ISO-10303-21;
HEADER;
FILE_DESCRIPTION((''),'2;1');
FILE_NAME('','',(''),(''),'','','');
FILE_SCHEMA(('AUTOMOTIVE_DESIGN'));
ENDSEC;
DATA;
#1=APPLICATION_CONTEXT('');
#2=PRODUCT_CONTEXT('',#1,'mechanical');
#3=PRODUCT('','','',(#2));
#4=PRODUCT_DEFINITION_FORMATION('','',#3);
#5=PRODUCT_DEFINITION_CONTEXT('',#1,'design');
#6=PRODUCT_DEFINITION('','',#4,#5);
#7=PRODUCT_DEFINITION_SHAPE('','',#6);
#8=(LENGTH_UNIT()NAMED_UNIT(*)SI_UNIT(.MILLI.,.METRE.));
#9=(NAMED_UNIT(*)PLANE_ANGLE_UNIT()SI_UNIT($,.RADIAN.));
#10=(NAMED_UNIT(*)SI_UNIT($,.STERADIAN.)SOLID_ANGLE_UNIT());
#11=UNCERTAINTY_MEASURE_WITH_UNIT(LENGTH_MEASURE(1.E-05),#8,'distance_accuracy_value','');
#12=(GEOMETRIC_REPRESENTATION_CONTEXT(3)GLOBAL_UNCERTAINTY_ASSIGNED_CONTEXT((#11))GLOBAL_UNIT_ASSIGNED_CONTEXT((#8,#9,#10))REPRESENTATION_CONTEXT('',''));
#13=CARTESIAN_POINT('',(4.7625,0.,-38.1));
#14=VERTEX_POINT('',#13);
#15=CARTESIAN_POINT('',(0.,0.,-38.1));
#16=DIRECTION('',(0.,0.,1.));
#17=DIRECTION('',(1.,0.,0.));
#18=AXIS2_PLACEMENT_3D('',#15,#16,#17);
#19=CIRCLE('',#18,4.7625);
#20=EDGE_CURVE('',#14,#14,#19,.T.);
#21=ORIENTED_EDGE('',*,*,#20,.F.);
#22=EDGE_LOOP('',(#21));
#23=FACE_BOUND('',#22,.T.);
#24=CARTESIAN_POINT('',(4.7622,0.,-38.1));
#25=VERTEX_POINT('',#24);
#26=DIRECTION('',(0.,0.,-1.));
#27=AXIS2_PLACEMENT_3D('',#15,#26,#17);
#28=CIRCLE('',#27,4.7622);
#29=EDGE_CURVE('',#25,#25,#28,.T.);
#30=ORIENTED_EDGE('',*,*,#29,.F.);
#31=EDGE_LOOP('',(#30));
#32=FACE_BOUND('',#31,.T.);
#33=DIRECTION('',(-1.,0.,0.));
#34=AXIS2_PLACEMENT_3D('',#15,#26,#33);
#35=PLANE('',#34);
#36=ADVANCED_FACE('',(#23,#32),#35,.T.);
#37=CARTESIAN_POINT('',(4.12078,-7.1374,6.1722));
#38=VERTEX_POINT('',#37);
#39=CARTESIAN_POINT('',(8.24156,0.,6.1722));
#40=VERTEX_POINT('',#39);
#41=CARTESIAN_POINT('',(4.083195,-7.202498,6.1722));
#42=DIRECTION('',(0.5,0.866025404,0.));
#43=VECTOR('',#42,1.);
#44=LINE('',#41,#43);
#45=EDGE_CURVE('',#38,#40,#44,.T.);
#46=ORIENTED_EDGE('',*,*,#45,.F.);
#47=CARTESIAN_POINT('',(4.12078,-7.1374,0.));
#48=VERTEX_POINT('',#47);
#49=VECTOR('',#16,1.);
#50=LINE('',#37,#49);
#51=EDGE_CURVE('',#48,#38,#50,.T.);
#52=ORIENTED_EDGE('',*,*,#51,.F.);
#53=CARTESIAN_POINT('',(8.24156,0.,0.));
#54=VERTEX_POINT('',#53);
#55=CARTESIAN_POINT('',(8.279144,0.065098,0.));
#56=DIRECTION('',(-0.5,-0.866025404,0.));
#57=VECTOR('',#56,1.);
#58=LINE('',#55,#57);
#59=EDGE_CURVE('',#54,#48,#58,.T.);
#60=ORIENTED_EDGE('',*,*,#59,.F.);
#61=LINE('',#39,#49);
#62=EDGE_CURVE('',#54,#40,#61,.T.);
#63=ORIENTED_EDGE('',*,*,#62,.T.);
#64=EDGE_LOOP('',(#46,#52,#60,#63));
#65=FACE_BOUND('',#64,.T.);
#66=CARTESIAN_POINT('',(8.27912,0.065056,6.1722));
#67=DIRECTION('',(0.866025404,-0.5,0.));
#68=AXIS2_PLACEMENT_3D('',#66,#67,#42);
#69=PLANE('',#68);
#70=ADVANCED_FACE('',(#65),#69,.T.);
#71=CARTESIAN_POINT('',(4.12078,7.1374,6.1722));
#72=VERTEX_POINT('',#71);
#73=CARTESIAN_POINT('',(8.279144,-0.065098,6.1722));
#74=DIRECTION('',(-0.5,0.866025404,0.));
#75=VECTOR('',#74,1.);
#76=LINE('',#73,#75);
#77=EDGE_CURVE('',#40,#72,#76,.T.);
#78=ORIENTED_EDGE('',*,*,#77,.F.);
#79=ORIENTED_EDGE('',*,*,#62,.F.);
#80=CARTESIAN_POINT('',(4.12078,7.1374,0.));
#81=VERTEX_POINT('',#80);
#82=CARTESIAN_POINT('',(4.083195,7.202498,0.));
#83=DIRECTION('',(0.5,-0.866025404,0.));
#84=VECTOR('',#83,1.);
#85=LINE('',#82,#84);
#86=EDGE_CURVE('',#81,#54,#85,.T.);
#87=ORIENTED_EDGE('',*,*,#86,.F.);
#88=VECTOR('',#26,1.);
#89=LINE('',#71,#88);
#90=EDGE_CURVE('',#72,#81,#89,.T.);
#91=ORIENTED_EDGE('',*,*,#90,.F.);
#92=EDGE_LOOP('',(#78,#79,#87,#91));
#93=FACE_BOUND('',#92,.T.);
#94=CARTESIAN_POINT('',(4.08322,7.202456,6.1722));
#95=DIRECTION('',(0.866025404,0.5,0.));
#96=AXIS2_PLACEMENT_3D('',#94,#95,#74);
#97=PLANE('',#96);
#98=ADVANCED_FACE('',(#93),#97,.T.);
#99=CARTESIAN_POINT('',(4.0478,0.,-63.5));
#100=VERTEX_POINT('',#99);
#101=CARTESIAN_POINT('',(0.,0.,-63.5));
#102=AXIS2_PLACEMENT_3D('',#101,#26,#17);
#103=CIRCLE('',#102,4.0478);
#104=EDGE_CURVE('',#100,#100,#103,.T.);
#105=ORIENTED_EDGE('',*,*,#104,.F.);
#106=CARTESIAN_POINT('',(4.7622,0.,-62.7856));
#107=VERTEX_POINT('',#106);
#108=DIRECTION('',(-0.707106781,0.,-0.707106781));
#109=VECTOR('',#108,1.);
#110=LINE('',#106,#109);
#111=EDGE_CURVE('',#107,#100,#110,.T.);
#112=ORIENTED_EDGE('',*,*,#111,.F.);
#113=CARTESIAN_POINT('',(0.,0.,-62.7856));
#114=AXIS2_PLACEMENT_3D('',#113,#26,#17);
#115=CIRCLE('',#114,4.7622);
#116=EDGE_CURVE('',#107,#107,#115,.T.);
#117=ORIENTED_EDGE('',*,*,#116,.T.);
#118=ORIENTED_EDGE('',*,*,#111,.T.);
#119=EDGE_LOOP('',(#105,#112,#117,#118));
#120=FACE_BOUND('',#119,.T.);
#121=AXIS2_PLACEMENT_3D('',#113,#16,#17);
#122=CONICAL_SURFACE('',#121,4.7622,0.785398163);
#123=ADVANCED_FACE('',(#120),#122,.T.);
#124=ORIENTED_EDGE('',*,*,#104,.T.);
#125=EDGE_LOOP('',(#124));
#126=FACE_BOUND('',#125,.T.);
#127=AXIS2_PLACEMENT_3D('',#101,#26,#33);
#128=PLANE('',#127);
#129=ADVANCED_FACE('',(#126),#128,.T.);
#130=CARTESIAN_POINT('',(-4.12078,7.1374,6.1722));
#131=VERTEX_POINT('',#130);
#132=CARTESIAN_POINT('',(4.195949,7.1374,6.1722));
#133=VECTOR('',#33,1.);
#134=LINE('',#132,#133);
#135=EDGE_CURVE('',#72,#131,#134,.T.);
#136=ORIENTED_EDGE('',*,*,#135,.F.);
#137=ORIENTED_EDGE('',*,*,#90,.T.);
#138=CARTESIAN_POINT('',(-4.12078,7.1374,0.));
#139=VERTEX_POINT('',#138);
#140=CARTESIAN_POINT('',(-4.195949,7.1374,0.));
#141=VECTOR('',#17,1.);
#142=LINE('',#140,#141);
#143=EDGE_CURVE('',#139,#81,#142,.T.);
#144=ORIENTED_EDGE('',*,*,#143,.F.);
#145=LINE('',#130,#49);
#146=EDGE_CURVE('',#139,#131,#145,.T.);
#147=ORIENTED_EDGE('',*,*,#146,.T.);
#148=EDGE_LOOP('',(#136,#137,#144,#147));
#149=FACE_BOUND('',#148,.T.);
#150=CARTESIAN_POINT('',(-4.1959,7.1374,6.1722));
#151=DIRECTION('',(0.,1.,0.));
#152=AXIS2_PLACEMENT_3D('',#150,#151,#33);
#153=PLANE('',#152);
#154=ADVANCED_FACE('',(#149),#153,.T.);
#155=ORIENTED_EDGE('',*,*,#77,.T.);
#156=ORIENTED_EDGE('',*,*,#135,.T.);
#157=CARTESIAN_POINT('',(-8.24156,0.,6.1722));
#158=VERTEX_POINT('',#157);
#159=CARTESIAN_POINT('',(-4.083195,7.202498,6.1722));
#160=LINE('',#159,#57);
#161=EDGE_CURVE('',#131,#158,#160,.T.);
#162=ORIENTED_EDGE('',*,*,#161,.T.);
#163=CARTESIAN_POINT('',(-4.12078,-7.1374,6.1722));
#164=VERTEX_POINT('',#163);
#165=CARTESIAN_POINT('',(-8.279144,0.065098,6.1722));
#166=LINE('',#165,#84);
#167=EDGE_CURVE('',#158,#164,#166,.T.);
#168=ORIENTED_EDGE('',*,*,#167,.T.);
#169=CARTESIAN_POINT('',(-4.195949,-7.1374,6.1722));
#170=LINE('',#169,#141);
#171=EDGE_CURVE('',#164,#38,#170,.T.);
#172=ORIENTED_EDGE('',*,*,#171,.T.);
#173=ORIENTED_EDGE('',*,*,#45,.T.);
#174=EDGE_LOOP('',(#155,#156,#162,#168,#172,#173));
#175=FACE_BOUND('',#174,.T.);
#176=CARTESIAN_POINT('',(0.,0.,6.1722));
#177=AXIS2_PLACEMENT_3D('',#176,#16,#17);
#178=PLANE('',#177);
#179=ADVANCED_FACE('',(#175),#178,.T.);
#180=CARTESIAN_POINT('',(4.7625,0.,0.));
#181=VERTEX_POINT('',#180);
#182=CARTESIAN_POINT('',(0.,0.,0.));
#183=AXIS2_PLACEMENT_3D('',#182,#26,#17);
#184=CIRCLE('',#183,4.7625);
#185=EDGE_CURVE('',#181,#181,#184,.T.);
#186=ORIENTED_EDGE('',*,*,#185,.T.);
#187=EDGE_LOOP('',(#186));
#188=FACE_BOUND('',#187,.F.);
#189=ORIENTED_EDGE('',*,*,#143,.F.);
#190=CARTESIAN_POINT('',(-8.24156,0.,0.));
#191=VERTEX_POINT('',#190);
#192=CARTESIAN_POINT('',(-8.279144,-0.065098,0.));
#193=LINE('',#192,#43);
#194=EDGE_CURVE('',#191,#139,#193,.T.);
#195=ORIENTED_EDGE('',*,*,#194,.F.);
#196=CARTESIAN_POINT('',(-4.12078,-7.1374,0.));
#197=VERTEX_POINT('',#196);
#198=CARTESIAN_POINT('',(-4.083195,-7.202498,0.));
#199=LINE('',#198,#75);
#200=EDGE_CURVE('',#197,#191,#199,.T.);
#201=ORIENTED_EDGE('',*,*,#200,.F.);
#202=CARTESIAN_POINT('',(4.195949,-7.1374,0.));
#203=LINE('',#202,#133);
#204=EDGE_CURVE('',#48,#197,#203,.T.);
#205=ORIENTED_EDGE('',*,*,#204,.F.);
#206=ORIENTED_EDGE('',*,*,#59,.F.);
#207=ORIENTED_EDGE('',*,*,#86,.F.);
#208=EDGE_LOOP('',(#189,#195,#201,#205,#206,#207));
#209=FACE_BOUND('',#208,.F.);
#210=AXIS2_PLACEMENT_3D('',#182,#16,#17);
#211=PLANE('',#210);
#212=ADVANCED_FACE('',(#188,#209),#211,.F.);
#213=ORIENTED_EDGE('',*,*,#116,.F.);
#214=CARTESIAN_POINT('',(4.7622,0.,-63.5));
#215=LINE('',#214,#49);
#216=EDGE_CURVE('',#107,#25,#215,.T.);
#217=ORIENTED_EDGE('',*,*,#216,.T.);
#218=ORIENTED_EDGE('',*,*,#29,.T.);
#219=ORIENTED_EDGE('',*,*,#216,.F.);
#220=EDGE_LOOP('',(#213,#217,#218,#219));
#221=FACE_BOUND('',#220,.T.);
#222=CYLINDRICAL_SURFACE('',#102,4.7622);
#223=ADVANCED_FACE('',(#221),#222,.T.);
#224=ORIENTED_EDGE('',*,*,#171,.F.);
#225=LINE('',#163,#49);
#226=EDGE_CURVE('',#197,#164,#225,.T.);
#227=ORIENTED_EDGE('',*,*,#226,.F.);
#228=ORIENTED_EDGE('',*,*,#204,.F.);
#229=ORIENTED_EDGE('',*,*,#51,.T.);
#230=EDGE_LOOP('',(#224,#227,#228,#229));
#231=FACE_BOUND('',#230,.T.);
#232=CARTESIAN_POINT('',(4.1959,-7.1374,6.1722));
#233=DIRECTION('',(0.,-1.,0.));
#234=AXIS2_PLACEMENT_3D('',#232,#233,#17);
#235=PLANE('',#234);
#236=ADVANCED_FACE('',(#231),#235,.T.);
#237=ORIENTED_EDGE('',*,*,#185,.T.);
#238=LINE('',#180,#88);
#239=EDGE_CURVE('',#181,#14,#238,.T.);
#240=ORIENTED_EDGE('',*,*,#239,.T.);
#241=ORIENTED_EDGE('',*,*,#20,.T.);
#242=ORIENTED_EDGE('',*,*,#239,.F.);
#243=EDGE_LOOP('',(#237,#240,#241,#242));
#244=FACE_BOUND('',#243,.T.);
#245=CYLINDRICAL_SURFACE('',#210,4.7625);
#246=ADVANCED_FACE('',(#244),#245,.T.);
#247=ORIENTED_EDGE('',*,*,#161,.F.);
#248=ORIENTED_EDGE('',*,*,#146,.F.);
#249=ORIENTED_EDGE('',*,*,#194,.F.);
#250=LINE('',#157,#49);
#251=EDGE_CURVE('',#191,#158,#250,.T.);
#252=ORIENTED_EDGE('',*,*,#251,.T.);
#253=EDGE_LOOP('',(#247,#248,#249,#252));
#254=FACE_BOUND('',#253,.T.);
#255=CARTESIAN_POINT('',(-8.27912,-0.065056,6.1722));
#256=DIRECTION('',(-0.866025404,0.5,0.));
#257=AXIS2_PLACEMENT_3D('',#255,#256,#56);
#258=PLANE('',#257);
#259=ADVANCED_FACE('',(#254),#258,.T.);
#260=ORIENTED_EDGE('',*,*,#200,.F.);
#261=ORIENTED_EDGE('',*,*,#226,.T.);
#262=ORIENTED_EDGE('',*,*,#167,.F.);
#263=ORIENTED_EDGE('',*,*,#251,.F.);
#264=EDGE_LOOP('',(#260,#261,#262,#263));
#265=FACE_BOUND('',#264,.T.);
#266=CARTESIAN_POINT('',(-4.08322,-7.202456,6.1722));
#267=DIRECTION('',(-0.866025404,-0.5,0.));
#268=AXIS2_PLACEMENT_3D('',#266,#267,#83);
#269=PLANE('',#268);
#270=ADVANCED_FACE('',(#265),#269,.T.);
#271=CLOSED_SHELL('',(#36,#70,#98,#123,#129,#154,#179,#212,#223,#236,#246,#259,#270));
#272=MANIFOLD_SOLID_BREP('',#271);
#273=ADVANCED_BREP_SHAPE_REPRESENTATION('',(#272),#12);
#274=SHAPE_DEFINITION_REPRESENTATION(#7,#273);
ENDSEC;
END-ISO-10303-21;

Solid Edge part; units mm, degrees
sketch "Sketch1" plane through (0, 0, 0) normal (0, 0, 1) x (1, 0, 0)
  circle A0 centre (0, 0) radius 8.2794
  dimension "D1" = 16.5588
extrude "Protrusion1" add sketch "Sketch1" along normal blind 6.1722
sketch "Sketch2" plane through (0, 0, 0) normal (0, 0, -1) x (1, 0, 0)
  circle A0 centre (0, 0) radius 4.7625
extrude "Protrusion2" add sketch "Sketch2" along normal blind 63.5
sketch "Sketch3" plane through (0, 0, -63.5) normal (0, 0, -1) x (1, 0, 0)
  circle A0 centre (0, 0) radius 4.7622
extrude "Cutout1" cut sketch "Sketch3" against normal blind 25.4 flip side to cut
chamfer "Chamfer_1" distance 0.7144 angle 45 1 edges at (-4.7622, 0, -63.5)
sketch "Sketch4" plane through (0, 0, 6.1722) normal (0, 0, 1) x (1, 0, 0)
  line L0 (-4.1959, 7.1374) -> (4.1959, 7.1374)
  dimension "D1" = 14.2748
extrude "Cutout2" cut sketch "Sketch4" against normal up to next material side at (0, 7.1874, 6.1722)
pattern_circular "Pattern1" count 6 over 360 about axis through (0, 0, 6.1722) along (0, 0, 1) of "Cutout2"
properties part number "147290"
